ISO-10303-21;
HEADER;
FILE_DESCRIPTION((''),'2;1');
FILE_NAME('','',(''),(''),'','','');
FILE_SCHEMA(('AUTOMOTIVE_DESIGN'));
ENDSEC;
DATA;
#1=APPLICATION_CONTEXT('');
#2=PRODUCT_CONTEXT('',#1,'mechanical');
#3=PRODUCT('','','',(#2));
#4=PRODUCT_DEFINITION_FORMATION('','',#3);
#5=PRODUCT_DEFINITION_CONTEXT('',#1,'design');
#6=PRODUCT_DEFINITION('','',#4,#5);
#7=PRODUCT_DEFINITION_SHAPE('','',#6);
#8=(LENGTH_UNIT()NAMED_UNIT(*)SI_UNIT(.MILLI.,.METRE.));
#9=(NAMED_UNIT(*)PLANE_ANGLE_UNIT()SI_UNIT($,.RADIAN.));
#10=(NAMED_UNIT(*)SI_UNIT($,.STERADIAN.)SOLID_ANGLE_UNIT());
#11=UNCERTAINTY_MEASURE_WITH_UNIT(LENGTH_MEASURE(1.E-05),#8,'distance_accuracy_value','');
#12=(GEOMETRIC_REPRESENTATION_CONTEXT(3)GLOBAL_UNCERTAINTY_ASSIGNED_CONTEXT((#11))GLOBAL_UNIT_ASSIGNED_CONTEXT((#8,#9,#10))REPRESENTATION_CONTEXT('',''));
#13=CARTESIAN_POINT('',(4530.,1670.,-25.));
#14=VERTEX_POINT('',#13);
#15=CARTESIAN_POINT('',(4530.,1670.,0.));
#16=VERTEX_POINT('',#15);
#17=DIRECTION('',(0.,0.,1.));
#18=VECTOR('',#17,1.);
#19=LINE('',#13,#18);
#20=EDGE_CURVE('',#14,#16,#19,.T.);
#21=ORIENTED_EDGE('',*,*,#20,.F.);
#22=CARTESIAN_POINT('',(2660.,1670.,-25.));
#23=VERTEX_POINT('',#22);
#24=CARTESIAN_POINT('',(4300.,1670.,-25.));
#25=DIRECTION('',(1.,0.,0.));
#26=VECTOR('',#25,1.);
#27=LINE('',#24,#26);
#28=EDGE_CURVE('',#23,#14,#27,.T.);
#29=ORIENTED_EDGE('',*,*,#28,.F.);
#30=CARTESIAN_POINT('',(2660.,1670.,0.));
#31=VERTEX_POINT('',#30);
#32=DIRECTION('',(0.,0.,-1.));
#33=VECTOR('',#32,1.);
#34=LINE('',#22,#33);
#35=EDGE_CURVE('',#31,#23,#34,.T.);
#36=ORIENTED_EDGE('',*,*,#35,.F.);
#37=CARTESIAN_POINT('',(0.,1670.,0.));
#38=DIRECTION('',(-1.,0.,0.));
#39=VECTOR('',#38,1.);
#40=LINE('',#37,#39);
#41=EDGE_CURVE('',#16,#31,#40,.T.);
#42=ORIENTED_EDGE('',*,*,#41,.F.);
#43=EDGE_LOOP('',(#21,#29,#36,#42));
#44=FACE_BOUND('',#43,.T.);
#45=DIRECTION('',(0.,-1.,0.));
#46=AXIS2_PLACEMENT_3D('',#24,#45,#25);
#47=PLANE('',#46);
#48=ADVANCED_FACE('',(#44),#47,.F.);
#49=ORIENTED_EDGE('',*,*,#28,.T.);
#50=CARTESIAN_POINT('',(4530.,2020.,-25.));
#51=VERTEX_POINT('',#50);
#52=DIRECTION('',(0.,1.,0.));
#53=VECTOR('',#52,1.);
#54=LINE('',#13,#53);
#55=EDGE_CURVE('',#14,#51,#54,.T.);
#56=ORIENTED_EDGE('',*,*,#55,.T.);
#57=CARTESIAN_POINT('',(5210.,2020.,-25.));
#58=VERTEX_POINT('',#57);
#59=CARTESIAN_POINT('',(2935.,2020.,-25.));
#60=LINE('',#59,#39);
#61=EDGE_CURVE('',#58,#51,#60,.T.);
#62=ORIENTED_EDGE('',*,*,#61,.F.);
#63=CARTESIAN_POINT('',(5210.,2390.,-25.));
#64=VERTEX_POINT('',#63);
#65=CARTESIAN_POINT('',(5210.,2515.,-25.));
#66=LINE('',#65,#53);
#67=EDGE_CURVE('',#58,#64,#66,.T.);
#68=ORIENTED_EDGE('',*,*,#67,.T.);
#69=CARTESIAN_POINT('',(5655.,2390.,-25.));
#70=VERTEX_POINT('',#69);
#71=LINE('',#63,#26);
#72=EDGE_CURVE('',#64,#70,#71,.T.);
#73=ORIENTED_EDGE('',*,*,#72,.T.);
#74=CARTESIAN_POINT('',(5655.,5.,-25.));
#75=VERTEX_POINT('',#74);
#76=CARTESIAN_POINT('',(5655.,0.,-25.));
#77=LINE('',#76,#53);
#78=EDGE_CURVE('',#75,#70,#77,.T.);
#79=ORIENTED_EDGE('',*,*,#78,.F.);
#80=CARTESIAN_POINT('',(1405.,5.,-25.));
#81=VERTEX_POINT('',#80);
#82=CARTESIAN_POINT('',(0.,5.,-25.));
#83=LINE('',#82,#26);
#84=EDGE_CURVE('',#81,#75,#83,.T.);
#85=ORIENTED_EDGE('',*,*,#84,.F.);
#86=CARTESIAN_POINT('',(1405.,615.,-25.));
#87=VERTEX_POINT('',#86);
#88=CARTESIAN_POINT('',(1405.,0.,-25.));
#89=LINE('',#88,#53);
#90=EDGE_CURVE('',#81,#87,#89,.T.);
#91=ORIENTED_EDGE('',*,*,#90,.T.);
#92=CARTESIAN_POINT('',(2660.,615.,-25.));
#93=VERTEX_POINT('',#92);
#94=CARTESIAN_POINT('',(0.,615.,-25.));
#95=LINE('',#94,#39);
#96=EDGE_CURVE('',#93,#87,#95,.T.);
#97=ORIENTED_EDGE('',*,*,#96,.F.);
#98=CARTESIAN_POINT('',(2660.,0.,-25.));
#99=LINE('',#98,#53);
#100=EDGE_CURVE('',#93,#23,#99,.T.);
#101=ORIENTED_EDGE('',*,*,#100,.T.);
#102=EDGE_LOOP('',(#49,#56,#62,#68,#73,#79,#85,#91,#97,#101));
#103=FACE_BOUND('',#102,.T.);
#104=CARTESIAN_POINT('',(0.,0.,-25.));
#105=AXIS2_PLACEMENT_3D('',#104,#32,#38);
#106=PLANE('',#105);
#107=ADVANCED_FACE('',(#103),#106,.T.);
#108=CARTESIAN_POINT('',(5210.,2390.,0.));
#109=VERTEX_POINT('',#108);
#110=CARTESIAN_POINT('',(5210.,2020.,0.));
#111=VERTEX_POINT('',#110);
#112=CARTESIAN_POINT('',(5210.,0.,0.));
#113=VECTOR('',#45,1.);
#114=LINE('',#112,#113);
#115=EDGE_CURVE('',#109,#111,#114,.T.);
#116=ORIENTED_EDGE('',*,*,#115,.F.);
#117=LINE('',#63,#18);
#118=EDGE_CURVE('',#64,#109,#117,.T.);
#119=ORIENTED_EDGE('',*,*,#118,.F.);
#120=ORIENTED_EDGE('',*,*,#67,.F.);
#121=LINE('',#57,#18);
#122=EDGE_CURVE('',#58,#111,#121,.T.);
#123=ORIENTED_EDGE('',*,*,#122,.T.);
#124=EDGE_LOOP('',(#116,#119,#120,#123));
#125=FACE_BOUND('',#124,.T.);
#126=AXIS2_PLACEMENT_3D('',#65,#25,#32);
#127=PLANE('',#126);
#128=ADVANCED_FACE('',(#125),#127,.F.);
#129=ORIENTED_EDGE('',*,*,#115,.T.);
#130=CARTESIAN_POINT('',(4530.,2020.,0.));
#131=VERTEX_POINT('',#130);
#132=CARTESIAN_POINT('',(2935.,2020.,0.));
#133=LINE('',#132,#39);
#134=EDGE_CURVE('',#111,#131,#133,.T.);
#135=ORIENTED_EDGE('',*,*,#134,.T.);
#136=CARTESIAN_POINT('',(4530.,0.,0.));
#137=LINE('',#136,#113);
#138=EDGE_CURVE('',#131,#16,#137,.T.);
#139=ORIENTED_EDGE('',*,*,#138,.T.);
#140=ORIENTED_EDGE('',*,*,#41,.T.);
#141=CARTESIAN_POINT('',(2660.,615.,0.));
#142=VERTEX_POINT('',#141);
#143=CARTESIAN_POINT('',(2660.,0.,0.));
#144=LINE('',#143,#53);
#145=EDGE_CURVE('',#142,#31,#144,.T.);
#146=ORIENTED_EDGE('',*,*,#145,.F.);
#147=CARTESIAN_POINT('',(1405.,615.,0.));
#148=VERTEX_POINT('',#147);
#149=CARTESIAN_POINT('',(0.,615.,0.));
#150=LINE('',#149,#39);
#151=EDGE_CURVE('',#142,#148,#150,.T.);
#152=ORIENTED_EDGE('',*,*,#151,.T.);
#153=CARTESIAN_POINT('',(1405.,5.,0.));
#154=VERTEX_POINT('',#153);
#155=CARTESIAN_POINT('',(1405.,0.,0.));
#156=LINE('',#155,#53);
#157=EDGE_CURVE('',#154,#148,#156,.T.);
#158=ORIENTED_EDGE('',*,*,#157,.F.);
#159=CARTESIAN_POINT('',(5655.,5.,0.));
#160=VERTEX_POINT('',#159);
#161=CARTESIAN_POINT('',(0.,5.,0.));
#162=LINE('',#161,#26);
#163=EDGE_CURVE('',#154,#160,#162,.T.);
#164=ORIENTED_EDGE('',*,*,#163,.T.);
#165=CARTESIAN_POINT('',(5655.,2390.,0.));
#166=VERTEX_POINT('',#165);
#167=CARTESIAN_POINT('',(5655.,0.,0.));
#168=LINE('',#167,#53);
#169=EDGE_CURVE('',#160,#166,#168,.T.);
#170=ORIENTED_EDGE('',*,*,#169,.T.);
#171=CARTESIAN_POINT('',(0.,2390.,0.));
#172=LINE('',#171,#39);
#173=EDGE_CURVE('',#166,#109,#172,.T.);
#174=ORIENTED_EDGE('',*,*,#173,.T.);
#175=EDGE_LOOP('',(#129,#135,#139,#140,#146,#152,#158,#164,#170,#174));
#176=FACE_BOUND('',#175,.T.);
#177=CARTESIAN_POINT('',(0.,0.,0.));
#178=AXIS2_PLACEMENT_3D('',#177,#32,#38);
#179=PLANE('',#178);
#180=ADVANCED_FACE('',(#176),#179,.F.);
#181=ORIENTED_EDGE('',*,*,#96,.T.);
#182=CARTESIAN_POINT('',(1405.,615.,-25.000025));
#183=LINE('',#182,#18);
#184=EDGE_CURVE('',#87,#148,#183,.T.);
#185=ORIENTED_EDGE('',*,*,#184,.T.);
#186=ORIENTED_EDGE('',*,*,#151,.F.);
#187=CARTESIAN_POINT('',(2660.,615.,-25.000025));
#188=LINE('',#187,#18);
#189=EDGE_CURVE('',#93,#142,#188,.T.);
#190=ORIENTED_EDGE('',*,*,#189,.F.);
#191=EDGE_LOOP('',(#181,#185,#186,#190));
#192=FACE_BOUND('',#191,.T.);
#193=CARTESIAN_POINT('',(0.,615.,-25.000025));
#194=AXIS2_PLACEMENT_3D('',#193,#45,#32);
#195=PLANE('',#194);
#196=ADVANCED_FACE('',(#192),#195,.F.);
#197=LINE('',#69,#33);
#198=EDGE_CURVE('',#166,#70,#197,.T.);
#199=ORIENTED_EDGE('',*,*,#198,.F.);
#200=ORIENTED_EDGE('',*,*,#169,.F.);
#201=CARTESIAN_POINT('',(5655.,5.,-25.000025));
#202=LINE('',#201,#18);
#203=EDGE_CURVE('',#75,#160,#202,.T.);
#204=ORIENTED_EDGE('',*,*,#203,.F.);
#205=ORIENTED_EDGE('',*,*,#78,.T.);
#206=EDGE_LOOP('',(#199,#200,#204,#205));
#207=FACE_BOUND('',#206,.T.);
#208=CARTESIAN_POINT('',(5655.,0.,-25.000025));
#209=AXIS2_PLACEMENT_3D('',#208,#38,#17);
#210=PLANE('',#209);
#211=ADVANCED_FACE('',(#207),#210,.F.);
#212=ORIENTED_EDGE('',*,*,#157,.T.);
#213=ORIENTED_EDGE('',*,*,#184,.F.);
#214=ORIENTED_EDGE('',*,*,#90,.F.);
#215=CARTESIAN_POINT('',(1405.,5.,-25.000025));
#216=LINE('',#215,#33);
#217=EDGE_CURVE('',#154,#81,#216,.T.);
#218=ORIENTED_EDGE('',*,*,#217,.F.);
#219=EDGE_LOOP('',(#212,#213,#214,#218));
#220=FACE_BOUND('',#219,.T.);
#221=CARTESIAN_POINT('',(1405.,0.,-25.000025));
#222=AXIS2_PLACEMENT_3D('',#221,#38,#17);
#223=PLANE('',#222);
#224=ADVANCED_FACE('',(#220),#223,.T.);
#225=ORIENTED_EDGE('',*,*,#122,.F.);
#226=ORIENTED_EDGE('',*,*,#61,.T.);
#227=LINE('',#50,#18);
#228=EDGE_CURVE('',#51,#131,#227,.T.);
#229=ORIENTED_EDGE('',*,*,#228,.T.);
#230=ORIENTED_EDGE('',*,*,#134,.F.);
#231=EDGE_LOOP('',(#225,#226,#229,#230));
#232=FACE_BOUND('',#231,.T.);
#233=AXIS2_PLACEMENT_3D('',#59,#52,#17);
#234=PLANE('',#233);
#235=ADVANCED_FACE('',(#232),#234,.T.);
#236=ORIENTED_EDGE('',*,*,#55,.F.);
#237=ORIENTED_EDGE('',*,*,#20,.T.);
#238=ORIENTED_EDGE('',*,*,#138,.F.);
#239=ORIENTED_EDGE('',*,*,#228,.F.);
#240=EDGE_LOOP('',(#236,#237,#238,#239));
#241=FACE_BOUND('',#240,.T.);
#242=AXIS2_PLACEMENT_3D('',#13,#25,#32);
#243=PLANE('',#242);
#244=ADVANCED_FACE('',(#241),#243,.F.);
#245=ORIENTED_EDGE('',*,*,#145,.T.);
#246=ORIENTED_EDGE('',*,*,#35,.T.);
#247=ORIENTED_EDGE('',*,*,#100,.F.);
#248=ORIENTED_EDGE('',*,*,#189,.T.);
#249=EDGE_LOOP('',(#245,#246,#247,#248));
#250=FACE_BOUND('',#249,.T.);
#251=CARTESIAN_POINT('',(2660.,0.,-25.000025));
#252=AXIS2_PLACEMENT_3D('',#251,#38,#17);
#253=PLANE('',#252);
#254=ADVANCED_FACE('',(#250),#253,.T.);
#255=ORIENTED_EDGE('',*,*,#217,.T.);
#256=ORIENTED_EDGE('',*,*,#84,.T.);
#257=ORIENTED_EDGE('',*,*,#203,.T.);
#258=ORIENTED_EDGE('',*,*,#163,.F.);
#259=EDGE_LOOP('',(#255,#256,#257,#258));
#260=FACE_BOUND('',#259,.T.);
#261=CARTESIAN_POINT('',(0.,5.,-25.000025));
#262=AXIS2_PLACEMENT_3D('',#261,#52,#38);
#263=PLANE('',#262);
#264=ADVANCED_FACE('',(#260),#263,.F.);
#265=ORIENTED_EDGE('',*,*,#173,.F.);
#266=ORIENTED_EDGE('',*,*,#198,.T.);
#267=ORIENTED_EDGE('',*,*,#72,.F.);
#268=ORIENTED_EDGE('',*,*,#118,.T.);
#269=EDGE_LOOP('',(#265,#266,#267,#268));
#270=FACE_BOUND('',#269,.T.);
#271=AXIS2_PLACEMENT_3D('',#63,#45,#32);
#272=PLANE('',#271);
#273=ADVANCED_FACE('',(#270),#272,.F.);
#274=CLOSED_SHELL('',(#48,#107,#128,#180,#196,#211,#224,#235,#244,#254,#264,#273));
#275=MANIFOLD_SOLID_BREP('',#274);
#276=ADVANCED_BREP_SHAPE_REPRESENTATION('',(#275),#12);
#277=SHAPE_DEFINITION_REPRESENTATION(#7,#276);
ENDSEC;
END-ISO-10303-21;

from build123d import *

# Parameters (mm, degrees)
TABAN_FLAN_1_DEPTH         = 25
KES_EKSTR_ZYON1_DEPTH      = 6508.676543898
KES_EKSTR_ZYON1_DEPTH_BACK = 6508.676543898
IZIM7_W                    = 1400
IZIM7_H                    = 1895
IZIM7_W_2                  = 310
IZIM7_H_2                  = 495
KES_EKSTR_ZYON2_DEPTH      = 6508.676543898
KES_EKSTR_ZYON2_DEPTH_BACK = 6508.676543898
IZIM8_W                    = 292
IZIM8_H                    = 2515
KES_EKSTR_ZYON3_DEPTH      = 6240.38698912
KES_EKSTR_ZYON3_DEPTH_BACK = 6240.38698912
IZIM10_W                   = 2900
IZIM10_H                   = 350
KES_EKSTR_ZYON4_DEPTH      = 6240.38698912
KES_EKSTR_ZYON4_DEPTH_BACK = 6240.38698912
KES_EKSTR_ZYON5_DEPTH      = 6191.05856192
KES_EKSTR_ZYON5_DEPTH_BACK = 6191.05856192
IZIM12_W                   = 5
IZIM12_H                   = 615
KES_EKSTR_ZYON6_DEPTH      = 6191.05856192
KES_EKSTR_ZYON6_DEPTH_BACK = 6191.05856192
IZIM13_W                   = 55
IZIM13_H                   = 2385


# Sheet-metal steps are written as plain solids
with BuildPart() as part:
    # Çizim1 → Taban-Flanş1 (new body)
    with BuildSketch(Plane.XY):
        Polygon((0, 0), (0, 1895), (2935, 1895), (2935, 2020), (4900, 2020), (4900, 2515), (6002, 2515), (6002, 0), align=None)
    extrude(amount=-TABAN_FLAN_1_DEPTH)

    # Çizim7 → Kes-Ekstrüzyon1 (cut, two sides: drawn at the far end of the back side and taken through both)
    with BuildSketch(Plane.XY.offset(-KES_EKSTR_ZYON1_DEPTH_BACK)):
        with Locations((700, 947.5)):
            Rectangle(IZIM7_W, IZIM7_H)
        with Locations((5055, 2267.5)):
            Rectangle(IZIM7_W_2, IZIM7_H_2)
    extrude(amount=KES_EKSTR_ZYON1_DEPTH + KES_EKSTR_ZYON1_DEPTH_BACK, mode=Mode.SUBTRACT)

    # Çizim8 → Kes-Ekstrüzyon2 (cut, two sides: drawn at the far end of the back side and taken through both)
    with BuildSketch(Plane.XY.offset(-KES_EKSTR_ZYON2_DEPTH_BACK)):
        with Locations((5856, 1257.5)):
            Rectangle(IZIM8_W, IZIM8_H)
    extrude(amount=KES_EKSTR_ZYON2_DEPTH + KES_EKSTR_ZYON2_DEPTH_BACK, mode=Mode.SUBTRACT)

    # Çizim10 → Kes-Ekstrüzyon3 (cut, two sides: drawn at the far end of the back side and taken through both)
    with BuildSketch(Plane.XY.offset(-KES_EKSTR_ZYON3_DEPTH_BACK)):
        with Locations((2850, 1845)):
            Rectangle(IZIM10_W, IZIM10_H)
    extrude(amount=KES_EKSTR_ZYON3_DEPTH + KES_EKSTR_ZYON3_DEPTH_BACK, mode=Mode.SUBTRACT)

    # Çizim11 → Kes-Ekstrüzyon4 (cut, two sides: drawn at the far end of the back side and taken through both)
    with BuildSketch(Plane.XY.offset(-KES_EKSTR_ZYON4_DEPTH_BACK)):
        Polygon((4300, 1670), (4530, 1670), (4530, 2020), (5210, 2020), (5210, 2390), (5710, 2390), (5778.630385148, 2406.496682207), (5749.815338653, 2697.266696836), (5189.231706845, 2697.266696836), (4530, 2199.552257381), (4300, 2199.552257381), align=None)
    extrude(amount=KES_EKSTR_ZYON4_DEPTH + KES_EKSTR_ZYON4_DEPTH_BACK, mode=Mode.SUBTRACT)

    # Çizim12 → Kes-Ekstrüzyon5 (cut, two sides: drawn at the far end of the back side and taken through both)
    with BuildSketch(Plane.XY.offset(-KES_EKSTR_ZYON5_DEPTH_BACK)):
        Polygon((2660, 1670), (1400, 1670), (1400, 615), (1405, 615), (2660, 615), align=None)
        with Locations((1402.5, 307.5)):
            Rectangle(IZIM12_W, IZIM12_H)
    extrude(amount=KES_EKSTR_ZYON5_DEPTH + KES_EKSTR_ZYON5_DEPTH_BACK, mode=Mode.SUBTRACT)

    # Çizim13 → Kes-Ekstrüzyon6 (cut, two sides: drawn at the far end of the back side and taken through both)
    with BuildSketch(Plane.XY.offset(-KES_EKSTR_ZYON6_DEPTH_BACK)):
        with Locations((5682.5, 1197.5)):
            Rectangle(IZIM13_W, IZIM13_H)
        Polygon((1405, 0), (5710, 0), (5710, 5), (5655, 5), (1405, 5), align=None)
    extrude(amount=KES_EKSTR_ZYON6_DEPTH + KES_EKSTR_ZYON6_DEPTH_BACK, mode=Mode.SUBTRACT)


solid = part.part
